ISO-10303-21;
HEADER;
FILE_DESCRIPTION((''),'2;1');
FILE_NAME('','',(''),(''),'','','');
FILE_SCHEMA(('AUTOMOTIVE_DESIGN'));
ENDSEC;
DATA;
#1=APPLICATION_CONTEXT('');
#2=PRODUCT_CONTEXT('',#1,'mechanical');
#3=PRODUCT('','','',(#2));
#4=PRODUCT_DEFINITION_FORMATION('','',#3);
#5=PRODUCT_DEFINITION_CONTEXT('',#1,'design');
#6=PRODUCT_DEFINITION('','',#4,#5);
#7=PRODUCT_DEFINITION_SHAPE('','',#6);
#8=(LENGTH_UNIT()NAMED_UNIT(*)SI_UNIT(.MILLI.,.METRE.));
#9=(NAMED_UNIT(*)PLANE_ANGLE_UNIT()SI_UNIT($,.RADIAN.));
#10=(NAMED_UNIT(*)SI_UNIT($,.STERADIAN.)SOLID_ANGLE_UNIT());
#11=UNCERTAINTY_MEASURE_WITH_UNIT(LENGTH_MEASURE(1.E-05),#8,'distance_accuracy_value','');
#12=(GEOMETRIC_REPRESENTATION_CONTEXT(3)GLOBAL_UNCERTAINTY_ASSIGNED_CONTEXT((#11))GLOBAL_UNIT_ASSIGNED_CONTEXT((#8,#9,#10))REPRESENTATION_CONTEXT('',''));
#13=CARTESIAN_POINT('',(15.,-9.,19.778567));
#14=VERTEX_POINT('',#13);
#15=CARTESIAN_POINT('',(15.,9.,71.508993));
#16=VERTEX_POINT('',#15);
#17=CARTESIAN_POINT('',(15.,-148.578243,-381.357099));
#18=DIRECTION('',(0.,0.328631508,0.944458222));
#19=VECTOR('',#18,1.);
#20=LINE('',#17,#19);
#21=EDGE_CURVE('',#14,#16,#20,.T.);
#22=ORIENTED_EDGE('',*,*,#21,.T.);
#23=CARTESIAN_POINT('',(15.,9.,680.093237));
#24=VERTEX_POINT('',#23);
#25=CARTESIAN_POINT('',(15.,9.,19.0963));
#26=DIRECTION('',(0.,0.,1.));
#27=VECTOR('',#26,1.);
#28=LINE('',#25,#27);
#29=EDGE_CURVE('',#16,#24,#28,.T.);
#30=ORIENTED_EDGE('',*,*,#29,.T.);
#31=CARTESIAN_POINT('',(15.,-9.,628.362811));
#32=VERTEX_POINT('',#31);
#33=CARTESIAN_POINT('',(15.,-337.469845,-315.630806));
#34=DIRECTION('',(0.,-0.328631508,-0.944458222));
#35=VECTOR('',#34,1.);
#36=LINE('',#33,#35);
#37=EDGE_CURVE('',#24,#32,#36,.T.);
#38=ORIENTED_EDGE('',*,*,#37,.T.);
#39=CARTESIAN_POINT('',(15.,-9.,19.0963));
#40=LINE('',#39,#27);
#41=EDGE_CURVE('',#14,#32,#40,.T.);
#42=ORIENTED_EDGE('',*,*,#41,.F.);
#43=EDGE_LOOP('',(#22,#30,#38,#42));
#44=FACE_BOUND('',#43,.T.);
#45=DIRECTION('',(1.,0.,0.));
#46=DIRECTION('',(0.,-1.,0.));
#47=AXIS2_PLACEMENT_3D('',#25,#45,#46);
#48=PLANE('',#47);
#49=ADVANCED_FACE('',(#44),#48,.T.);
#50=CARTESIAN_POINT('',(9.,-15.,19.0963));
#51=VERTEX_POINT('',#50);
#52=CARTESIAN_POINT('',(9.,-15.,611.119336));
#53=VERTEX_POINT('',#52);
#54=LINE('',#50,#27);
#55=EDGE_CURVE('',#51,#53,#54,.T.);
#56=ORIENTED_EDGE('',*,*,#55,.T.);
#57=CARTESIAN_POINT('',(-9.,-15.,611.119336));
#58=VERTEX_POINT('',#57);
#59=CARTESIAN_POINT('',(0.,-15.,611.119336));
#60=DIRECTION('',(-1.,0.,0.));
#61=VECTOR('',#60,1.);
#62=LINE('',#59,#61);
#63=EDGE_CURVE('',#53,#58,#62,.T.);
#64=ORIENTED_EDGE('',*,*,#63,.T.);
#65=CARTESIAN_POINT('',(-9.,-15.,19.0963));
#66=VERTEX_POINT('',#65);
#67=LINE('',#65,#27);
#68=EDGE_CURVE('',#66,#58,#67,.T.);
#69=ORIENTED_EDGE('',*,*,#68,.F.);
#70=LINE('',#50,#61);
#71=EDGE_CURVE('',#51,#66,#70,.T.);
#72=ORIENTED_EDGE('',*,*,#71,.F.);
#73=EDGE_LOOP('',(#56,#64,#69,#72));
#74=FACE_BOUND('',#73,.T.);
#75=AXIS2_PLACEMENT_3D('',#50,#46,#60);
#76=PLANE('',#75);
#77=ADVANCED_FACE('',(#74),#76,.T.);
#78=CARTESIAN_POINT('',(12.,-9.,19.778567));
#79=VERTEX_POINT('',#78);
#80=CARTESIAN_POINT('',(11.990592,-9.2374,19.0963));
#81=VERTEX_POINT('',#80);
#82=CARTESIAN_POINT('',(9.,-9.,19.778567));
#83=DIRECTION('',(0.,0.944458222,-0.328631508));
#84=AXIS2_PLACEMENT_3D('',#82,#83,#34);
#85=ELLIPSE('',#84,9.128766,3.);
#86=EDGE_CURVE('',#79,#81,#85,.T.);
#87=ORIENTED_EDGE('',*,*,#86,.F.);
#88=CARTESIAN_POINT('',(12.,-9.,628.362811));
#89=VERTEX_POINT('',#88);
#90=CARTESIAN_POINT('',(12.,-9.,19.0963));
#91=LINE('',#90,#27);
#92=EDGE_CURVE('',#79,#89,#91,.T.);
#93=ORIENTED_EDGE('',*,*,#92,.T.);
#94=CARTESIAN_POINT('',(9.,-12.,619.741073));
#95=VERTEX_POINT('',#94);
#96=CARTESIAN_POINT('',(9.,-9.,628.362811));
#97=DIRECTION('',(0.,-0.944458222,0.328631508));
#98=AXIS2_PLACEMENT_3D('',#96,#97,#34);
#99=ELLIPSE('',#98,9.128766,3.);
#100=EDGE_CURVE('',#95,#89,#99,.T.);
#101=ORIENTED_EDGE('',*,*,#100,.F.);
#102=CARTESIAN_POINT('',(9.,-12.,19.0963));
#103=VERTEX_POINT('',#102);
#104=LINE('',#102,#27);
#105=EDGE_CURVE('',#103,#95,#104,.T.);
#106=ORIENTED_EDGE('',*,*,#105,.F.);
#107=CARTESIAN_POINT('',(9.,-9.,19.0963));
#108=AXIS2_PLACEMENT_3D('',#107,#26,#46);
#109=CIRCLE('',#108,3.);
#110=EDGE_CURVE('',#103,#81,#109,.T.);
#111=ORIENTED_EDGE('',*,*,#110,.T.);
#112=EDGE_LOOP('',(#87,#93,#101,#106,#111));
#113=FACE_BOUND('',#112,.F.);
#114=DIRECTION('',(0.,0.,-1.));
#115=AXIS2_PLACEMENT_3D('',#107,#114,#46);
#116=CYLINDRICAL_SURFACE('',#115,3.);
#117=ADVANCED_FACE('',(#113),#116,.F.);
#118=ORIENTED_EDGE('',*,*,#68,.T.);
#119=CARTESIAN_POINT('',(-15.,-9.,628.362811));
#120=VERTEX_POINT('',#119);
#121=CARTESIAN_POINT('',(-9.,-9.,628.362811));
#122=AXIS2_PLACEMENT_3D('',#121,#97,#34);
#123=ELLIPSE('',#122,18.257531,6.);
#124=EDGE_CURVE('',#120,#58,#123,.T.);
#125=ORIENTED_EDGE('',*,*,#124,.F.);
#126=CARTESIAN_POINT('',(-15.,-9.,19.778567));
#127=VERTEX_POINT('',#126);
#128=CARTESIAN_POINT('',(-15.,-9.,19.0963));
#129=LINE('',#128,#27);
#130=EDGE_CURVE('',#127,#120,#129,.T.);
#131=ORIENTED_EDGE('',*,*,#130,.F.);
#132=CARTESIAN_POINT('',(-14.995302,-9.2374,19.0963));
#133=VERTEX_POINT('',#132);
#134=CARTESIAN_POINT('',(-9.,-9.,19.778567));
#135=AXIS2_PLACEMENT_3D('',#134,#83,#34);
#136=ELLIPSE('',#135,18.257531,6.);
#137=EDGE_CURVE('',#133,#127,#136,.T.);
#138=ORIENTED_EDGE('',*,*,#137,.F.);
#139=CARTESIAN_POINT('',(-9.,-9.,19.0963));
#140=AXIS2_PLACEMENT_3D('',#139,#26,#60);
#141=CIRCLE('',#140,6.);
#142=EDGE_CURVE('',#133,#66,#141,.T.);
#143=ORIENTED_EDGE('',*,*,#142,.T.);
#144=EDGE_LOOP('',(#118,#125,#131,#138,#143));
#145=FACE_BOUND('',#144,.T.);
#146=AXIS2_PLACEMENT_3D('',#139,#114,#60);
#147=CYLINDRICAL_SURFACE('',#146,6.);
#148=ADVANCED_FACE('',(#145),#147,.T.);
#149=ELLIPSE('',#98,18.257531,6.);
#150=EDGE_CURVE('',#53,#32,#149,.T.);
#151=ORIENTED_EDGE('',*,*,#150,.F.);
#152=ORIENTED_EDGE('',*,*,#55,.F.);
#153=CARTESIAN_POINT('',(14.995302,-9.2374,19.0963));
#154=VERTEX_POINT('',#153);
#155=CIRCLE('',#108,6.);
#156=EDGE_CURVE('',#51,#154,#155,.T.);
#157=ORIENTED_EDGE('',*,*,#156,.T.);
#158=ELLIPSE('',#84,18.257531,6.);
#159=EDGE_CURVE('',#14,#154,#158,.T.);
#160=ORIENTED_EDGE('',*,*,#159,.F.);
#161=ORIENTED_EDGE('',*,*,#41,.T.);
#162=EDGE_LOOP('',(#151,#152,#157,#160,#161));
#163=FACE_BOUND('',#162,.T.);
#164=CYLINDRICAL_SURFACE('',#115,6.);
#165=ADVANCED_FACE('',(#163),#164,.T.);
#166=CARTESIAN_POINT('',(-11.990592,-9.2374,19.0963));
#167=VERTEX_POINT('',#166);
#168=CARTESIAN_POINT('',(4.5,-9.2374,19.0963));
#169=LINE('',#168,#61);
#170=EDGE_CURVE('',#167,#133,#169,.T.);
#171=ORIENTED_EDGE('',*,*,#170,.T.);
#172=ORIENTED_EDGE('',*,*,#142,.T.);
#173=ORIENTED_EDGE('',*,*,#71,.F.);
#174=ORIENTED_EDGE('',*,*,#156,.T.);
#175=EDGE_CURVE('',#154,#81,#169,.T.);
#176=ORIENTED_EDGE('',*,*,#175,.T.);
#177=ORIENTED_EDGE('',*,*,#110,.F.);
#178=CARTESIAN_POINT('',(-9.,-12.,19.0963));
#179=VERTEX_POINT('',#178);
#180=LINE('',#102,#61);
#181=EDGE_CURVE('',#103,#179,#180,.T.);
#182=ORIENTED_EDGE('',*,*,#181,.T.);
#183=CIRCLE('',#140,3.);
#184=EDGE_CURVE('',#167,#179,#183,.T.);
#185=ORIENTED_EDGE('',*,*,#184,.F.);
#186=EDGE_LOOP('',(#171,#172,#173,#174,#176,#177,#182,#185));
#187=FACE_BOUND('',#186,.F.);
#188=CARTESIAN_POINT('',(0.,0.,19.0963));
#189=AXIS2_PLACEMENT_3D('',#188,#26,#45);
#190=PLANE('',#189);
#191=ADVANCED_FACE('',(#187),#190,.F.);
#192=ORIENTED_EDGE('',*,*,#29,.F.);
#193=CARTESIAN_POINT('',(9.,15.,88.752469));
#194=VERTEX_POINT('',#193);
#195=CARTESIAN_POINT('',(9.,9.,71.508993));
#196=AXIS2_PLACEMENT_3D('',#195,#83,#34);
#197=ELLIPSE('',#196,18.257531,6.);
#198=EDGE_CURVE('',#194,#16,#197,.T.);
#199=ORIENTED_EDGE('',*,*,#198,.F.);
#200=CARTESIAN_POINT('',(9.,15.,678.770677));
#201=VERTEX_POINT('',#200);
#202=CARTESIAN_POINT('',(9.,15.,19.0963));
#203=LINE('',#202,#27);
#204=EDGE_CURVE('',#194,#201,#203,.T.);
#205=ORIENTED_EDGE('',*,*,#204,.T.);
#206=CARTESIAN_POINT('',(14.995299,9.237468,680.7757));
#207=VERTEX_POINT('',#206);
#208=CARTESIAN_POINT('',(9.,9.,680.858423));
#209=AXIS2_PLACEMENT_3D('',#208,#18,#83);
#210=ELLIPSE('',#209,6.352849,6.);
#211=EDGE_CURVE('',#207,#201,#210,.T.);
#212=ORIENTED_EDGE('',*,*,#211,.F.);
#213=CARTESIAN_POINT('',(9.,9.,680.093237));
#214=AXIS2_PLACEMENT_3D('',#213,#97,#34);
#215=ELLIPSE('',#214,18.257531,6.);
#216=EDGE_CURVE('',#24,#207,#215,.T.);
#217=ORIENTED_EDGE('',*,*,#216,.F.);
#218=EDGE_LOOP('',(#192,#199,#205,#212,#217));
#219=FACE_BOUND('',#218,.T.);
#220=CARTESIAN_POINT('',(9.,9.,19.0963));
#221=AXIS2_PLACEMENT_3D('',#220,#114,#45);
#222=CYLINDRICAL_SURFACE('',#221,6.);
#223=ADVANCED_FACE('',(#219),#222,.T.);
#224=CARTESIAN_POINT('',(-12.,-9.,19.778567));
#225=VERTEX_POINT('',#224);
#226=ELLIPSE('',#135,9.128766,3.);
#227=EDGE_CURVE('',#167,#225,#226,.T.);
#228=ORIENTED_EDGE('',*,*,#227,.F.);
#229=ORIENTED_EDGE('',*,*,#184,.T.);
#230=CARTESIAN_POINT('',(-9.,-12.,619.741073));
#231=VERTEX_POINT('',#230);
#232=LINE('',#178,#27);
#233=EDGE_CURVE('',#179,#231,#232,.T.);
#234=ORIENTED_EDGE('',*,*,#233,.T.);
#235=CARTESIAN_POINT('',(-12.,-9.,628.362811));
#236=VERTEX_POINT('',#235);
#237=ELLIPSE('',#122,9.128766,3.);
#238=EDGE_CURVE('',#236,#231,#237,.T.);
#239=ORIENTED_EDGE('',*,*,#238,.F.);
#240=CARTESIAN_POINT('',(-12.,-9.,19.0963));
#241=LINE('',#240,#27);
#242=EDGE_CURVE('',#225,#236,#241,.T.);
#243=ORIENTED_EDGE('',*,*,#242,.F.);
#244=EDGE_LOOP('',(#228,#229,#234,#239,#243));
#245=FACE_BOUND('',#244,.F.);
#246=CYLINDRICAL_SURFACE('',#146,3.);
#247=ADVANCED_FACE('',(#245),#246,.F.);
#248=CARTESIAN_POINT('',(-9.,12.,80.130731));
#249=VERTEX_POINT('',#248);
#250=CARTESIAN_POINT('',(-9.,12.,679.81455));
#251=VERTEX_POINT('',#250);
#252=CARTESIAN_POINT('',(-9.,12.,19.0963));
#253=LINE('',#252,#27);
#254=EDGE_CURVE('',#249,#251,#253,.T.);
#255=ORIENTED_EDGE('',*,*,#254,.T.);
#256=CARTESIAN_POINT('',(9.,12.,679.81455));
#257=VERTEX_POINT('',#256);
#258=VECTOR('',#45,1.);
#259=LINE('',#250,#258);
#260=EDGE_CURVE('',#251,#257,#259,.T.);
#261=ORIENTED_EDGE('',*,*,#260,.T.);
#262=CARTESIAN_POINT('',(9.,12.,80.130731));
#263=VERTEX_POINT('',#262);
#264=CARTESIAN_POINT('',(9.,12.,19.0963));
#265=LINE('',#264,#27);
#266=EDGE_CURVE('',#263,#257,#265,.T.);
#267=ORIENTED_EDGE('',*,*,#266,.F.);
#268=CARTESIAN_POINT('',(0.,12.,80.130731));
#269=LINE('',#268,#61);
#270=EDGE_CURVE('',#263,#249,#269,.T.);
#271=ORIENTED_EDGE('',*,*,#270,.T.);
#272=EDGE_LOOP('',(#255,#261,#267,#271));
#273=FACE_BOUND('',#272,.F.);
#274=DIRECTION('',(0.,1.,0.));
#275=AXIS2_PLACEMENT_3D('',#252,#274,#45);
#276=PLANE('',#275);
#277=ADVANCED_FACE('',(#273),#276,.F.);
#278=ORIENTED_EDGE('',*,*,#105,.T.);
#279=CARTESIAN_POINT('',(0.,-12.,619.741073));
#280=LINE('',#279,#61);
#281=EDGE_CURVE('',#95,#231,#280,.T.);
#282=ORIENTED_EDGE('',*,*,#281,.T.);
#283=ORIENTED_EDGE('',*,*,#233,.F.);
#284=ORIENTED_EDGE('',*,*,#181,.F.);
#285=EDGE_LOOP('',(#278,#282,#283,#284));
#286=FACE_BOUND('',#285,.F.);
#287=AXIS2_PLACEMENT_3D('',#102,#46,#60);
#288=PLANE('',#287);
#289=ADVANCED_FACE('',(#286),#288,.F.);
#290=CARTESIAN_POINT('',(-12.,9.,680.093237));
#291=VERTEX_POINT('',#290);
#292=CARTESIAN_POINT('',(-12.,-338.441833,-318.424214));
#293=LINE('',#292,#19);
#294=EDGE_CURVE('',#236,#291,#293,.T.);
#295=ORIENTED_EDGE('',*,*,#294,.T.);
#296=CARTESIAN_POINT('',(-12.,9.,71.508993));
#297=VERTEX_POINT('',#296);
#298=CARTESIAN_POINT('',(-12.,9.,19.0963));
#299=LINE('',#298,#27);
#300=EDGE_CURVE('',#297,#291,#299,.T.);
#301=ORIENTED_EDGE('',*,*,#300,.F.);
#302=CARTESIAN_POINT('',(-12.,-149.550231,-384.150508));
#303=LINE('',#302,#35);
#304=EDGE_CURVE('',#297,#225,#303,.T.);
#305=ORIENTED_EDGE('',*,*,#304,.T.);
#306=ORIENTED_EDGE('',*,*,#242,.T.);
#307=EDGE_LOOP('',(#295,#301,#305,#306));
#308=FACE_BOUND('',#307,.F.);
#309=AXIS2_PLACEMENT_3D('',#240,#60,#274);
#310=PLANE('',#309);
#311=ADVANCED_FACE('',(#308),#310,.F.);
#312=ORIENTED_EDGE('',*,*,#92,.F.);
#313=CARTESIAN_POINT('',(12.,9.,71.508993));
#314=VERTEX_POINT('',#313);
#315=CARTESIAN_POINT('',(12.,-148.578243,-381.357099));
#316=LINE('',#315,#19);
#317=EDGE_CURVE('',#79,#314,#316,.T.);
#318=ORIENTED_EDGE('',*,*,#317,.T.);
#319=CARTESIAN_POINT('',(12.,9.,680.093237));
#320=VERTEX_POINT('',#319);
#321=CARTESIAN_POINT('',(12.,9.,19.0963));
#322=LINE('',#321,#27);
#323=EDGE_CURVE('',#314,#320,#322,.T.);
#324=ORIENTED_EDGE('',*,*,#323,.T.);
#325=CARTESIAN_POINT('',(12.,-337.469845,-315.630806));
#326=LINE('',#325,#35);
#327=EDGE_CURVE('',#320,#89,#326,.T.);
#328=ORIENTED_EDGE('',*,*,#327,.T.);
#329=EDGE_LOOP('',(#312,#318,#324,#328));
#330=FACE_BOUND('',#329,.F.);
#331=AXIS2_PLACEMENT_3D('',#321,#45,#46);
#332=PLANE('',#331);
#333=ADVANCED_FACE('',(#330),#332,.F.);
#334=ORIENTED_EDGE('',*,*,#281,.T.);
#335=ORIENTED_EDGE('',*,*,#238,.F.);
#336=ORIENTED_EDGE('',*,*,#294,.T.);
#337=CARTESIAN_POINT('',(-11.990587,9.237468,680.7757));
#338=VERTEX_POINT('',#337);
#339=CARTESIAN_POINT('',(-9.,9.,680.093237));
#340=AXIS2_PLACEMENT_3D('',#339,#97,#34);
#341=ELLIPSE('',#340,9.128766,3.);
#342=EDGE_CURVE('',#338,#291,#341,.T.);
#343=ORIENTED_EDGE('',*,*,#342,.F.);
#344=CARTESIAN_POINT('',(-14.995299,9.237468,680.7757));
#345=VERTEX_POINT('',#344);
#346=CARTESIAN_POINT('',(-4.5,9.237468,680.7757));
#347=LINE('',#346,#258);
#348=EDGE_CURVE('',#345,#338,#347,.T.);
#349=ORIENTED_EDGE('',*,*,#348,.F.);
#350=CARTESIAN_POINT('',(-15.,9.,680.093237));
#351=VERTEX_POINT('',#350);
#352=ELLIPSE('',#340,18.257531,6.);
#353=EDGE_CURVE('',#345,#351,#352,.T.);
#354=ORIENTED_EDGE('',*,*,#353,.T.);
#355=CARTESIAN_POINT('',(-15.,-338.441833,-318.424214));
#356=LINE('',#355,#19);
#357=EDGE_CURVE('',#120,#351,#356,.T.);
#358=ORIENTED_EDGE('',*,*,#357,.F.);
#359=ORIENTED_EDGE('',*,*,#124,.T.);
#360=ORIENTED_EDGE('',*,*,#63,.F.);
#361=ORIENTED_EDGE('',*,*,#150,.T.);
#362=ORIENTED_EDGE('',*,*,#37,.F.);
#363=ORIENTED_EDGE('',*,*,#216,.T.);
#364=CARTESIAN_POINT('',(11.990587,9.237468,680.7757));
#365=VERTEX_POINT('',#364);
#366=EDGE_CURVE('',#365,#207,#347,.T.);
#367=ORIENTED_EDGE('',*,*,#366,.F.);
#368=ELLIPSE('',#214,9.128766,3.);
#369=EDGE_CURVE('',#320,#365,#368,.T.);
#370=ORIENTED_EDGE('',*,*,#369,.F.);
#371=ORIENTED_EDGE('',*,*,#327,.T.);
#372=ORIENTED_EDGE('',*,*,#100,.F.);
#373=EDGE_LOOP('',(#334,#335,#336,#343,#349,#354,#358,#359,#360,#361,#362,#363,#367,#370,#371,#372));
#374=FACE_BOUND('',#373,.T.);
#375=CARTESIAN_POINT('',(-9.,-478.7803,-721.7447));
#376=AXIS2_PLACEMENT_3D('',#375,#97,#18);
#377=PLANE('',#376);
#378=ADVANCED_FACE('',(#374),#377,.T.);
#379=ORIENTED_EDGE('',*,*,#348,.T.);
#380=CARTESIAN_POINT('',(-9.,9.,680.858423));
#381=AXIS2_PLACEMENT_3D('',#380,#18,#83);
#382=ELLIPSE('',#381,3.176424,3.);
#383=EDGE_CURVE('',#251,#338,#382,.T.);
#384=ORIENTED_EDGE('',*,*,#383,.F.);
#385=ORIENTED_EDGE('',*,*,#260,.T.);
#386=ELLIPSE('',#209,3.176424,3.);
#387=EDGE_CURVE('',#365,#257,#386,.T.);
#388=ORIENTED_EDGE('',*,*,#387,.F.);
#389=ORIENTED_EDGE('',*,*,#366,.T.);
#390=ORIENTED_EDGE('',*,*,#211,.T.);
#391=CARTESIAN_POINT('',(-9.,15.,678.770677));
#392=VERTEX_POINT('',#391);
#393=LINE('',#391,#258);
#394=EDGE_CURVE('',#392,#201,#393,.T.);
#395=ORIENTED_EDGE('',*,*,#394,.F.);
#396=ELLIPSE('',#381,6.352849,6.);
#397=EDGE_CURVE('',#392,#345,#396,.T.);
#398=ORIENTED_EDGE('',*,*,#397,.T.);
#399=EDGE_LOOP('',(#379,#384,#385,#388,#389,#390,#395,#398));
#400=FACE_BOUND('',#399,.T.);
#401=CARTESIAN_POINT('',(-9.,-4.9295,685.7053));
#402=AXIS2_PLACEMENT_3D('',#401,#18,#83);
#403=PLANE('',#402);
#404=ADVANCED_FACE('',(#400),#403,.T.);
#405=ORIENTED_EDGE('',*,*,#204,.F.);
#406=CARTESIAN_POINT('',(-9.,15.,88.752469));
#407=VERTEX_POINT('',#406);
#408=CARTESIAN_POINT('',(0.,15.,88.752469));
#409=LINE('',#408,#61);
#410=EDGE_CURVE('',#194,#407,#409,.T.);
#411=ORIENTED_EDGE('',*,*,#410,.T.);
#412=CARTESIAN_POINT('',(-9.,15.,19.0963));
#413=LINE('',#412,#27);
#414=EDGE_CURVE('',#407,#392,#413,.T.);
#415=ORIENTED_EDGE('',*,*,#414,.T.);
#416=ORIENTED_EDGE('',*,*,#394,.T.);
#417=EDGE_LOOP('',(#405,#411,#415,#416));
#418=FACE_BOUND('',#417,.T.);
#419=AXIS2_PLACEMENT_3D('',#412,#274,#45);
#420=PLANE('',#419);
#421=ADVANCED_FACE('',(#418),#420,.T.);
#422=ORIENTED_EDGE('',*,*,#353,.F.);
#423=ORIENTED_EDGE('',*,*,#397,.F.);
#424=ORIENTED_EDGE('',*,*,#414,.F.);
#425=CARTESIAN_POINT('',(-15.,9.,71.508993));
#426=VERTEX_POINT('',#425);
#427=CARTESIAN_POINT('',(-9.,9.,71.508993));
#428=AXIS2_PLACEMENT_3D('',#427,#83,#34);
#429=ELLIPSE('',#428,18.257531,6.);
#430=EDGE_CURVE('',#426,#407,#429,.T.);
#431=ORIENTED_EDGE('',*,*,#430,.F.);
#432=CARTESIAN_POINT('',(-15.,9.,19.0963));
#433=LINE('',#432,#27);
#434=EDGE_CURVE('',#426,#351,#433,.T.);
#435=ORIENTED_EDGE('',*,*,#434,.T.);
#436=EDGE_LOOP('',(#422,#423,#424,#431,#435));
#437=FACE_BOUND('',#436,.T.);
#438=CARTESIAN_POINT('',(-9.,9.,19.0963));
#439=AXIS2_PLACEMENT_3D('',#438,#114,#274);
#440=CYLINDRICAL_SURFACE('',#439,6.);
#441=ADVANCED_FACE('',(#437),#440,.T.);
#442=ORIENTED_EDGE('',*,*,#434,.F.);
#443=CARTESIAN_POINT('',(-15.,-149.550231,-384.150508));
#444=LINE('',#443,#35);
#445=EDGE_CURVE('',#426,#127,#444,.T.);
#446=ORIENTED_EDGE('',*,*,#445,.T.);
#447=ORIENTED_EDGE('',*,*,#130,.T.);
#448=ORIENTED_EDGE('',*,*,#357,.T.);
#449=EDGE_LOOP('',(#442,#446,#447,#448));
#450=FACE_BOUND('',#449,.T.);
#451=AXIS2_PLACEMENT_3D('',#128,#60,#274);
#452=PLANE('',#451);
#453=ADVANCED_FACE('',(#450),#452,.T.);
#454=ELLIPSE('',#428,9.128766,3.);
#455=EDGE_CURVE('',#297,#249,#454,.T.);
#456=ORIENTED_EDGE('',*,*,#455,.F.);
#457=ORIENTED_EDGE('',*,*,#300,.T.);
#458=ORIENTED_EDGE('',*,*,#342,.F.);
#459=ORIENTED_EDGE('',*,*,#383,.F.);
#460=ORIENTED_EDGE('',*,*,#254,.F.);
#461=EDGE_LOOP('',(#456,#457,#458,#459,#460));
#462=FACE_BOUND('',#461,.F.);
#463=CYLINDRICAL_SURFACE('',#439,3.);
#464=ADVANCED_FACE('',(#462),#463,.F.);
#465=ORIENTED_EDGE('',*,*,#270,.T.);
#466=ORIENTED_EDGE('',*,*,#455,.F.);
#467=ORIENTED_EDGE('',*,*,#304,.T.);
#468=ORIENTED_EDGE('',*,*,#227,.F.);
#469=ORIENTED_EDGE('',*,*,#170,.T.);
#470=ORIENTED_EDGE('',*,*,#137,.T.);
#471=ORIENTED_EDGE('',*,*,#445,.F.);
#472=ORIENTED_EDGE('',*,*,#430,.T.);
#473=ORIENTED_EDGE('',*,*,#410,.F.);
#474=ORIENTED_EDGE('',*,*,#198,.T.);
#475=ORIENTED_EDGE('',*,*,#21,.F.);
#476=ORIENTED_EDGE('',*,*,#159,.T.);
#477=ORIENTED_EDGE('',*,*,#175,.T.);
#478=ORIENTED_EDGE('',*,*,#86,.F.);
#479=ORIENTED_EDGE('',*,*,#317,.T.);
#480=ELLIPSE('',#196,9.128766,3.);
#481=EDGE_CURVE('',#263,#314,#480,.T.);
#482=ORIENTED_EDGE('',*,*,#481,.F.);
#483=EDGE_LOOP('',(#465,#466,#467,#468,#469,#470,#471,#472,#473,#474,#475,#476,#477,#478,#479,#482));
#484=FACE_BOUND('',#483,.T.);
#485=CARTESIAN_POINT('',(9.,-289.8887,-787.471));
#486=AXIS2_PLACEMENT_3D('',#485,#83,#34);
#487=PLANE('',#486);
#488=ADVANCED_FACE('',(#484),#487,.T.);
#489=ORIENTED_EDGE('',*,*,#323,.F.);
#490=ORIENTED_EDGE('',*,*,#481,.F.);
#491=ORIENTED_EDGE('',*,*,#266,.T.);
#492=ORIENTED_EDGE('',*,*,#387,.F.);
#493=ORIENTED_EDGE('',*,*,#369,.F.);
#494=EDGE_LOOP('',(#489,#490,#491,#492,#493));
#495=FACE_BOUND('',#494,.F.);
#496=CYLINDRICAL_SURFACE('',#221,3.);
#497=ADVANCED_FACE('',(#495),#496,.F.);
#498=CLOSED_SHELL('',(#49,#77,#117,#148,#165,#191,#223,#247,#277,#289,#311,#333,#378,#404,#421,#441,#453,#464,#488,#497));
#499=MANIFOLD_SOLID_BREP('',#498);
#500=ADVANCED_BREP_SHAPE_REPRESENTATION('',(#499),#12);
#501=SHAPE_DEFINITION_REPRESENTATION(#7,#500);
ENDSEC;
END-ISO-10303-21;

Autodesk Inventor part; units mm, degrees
ref_plane "Start Plane" through (0, 0, 19.0963) normal (0, 0, 1) x (1, 0, 0)
ref_plane "End Plane" through (0, 0, 680.7758) normal (0, 0, 1) x (1, 0, 0)
sketch "Sketch" plane through (0, 0, 0) normal (0, 0, 1) x (1, 0, 0)
  line L0 (-15, -9) -> (-15, 9)
  line L1 (-9, 15) -> (9, 15)
  line L2 (15, 9) -> (15, -9)
  line L3 (9, -15) -> (-9, -15)
  arc A0 (-15, -9) -> (-9, -15) centre (-9, -9) ccw
  arc A1 (-9, 15) -> (-15, 9) centre (-9, 9) ccw
  arc A2 (15, 9) -> (9, 15) centre (9, 9) ccw
  arc A3 (9, -15) -> (15, -9) centre (9, -9) ccw
  arc A4 (-9, 12) -> (-12, 9) centre (-9, 9) ccw
  line L4 (-9, 12) -> (9, 12)
  arc A5 (12, 9) -> (9, 12) centre (9, 9) ccw
  line L5 (12, 9) -> (12, -9)
  arc A6 (9, -12) -> (12, -9) centre (9, -9) ccw
  line L6 (9, -12) -> (-9, -12)
  arc A7 (-12, -9) -> (-9, -12) centre (-9, -9) ccw
  line L7 (-12, -9) -> (-12, 9)
  line L8 (0, 22.7397) -> (0, -22.7397) construction
  line L9 (-22.7397, 0) -> (22.7397, 0) construction
  dimension "d7" = 6
  dimension "d10" = 30
  dimension "d11" = 30
  dimension "d12" = 3
  dimension "d15" = 15
  dimension "d16" = 15
extrude "Body" add sketch "Sketch" along normal up to surface (661.6794 mm away) from surface at 19.0963
sketch "Sketch3" plane through (0, 0, 0) normal (0, 0, 1) x (1, 0, 0)
  line L0 (0, 0) -> (10, 0)
ref_plane "Work Plane3" through (0, 0, 0) normal (0, -1, 0) x (1, 0, 0)
ref_plane "Work Plane4" through (-9, -478.7803, -721.7447) normal (0, -0.9444582, 0.3286315) x (1, 0, 0)
split "Split1" plane through (-9, -478.7803, -721.7447) removes the side toward (0, -0.9444582, 0.3286315)
ref_plane "Work Plane5" through (9, -289.8887, -787.471) normal (0, 0.9444582, -0.3286315) x (1, 0, 0)
split "Split2" plane through (9, -289.8887, -787.471) removes the side toward (0, 0.9444582, -0.3286315)
ref_plane "Work Plane6" through (-9, -4.9295, 685.7053) normal (0, 0.3286315, 0.9444582) x (1, 0, 0)
split "Split3" plane through (-9, -4.9295, 685.7053) removes the side toward (0, 0.3286315, 0.9444582)
sketch "Sketch4" plane through (0, 0, 0) normal (0, -1, 0) x (1, 0, 0)
  line L0 (-2, 19.0963) -> (12, 19.0963) projected
  line L1 (-2, 680.7758) -> (12, 680.7758) projected
  dimension "d18" = 661.6794
equation "\"d7\" = G_IR"
equation "\"d10\" = G_H"
equation "\"d11\" = G_W"
equation "\"d12\" = G_T"
equation "\"d15\" = 0.5 * d10"
equation "\"d16\" = 0.5 * d11"
equation "\"d3\" = G_L"
equation "\"G_W\" = 30"
equation "\"G_H\" = 30"
equation "\"G_T\" = 3"
equation "\"G_IR\" = 6"
equation "\"G_L\" = d18"
equation "\"G_OFFSET_START\" = -19.09635"
equation "\"G_OFFSET_END\" = -19.09635"
equation "\"d13\" = -G_OFFSET_START"
equation "\"d14\" = G_OFFSET_END + B_L"
equation "\"B_L\" = 699.87213"
properties part number "DIN EN 10219-2 - 30 x 30 x 3  - 661.68" material "Steel, Mild"
